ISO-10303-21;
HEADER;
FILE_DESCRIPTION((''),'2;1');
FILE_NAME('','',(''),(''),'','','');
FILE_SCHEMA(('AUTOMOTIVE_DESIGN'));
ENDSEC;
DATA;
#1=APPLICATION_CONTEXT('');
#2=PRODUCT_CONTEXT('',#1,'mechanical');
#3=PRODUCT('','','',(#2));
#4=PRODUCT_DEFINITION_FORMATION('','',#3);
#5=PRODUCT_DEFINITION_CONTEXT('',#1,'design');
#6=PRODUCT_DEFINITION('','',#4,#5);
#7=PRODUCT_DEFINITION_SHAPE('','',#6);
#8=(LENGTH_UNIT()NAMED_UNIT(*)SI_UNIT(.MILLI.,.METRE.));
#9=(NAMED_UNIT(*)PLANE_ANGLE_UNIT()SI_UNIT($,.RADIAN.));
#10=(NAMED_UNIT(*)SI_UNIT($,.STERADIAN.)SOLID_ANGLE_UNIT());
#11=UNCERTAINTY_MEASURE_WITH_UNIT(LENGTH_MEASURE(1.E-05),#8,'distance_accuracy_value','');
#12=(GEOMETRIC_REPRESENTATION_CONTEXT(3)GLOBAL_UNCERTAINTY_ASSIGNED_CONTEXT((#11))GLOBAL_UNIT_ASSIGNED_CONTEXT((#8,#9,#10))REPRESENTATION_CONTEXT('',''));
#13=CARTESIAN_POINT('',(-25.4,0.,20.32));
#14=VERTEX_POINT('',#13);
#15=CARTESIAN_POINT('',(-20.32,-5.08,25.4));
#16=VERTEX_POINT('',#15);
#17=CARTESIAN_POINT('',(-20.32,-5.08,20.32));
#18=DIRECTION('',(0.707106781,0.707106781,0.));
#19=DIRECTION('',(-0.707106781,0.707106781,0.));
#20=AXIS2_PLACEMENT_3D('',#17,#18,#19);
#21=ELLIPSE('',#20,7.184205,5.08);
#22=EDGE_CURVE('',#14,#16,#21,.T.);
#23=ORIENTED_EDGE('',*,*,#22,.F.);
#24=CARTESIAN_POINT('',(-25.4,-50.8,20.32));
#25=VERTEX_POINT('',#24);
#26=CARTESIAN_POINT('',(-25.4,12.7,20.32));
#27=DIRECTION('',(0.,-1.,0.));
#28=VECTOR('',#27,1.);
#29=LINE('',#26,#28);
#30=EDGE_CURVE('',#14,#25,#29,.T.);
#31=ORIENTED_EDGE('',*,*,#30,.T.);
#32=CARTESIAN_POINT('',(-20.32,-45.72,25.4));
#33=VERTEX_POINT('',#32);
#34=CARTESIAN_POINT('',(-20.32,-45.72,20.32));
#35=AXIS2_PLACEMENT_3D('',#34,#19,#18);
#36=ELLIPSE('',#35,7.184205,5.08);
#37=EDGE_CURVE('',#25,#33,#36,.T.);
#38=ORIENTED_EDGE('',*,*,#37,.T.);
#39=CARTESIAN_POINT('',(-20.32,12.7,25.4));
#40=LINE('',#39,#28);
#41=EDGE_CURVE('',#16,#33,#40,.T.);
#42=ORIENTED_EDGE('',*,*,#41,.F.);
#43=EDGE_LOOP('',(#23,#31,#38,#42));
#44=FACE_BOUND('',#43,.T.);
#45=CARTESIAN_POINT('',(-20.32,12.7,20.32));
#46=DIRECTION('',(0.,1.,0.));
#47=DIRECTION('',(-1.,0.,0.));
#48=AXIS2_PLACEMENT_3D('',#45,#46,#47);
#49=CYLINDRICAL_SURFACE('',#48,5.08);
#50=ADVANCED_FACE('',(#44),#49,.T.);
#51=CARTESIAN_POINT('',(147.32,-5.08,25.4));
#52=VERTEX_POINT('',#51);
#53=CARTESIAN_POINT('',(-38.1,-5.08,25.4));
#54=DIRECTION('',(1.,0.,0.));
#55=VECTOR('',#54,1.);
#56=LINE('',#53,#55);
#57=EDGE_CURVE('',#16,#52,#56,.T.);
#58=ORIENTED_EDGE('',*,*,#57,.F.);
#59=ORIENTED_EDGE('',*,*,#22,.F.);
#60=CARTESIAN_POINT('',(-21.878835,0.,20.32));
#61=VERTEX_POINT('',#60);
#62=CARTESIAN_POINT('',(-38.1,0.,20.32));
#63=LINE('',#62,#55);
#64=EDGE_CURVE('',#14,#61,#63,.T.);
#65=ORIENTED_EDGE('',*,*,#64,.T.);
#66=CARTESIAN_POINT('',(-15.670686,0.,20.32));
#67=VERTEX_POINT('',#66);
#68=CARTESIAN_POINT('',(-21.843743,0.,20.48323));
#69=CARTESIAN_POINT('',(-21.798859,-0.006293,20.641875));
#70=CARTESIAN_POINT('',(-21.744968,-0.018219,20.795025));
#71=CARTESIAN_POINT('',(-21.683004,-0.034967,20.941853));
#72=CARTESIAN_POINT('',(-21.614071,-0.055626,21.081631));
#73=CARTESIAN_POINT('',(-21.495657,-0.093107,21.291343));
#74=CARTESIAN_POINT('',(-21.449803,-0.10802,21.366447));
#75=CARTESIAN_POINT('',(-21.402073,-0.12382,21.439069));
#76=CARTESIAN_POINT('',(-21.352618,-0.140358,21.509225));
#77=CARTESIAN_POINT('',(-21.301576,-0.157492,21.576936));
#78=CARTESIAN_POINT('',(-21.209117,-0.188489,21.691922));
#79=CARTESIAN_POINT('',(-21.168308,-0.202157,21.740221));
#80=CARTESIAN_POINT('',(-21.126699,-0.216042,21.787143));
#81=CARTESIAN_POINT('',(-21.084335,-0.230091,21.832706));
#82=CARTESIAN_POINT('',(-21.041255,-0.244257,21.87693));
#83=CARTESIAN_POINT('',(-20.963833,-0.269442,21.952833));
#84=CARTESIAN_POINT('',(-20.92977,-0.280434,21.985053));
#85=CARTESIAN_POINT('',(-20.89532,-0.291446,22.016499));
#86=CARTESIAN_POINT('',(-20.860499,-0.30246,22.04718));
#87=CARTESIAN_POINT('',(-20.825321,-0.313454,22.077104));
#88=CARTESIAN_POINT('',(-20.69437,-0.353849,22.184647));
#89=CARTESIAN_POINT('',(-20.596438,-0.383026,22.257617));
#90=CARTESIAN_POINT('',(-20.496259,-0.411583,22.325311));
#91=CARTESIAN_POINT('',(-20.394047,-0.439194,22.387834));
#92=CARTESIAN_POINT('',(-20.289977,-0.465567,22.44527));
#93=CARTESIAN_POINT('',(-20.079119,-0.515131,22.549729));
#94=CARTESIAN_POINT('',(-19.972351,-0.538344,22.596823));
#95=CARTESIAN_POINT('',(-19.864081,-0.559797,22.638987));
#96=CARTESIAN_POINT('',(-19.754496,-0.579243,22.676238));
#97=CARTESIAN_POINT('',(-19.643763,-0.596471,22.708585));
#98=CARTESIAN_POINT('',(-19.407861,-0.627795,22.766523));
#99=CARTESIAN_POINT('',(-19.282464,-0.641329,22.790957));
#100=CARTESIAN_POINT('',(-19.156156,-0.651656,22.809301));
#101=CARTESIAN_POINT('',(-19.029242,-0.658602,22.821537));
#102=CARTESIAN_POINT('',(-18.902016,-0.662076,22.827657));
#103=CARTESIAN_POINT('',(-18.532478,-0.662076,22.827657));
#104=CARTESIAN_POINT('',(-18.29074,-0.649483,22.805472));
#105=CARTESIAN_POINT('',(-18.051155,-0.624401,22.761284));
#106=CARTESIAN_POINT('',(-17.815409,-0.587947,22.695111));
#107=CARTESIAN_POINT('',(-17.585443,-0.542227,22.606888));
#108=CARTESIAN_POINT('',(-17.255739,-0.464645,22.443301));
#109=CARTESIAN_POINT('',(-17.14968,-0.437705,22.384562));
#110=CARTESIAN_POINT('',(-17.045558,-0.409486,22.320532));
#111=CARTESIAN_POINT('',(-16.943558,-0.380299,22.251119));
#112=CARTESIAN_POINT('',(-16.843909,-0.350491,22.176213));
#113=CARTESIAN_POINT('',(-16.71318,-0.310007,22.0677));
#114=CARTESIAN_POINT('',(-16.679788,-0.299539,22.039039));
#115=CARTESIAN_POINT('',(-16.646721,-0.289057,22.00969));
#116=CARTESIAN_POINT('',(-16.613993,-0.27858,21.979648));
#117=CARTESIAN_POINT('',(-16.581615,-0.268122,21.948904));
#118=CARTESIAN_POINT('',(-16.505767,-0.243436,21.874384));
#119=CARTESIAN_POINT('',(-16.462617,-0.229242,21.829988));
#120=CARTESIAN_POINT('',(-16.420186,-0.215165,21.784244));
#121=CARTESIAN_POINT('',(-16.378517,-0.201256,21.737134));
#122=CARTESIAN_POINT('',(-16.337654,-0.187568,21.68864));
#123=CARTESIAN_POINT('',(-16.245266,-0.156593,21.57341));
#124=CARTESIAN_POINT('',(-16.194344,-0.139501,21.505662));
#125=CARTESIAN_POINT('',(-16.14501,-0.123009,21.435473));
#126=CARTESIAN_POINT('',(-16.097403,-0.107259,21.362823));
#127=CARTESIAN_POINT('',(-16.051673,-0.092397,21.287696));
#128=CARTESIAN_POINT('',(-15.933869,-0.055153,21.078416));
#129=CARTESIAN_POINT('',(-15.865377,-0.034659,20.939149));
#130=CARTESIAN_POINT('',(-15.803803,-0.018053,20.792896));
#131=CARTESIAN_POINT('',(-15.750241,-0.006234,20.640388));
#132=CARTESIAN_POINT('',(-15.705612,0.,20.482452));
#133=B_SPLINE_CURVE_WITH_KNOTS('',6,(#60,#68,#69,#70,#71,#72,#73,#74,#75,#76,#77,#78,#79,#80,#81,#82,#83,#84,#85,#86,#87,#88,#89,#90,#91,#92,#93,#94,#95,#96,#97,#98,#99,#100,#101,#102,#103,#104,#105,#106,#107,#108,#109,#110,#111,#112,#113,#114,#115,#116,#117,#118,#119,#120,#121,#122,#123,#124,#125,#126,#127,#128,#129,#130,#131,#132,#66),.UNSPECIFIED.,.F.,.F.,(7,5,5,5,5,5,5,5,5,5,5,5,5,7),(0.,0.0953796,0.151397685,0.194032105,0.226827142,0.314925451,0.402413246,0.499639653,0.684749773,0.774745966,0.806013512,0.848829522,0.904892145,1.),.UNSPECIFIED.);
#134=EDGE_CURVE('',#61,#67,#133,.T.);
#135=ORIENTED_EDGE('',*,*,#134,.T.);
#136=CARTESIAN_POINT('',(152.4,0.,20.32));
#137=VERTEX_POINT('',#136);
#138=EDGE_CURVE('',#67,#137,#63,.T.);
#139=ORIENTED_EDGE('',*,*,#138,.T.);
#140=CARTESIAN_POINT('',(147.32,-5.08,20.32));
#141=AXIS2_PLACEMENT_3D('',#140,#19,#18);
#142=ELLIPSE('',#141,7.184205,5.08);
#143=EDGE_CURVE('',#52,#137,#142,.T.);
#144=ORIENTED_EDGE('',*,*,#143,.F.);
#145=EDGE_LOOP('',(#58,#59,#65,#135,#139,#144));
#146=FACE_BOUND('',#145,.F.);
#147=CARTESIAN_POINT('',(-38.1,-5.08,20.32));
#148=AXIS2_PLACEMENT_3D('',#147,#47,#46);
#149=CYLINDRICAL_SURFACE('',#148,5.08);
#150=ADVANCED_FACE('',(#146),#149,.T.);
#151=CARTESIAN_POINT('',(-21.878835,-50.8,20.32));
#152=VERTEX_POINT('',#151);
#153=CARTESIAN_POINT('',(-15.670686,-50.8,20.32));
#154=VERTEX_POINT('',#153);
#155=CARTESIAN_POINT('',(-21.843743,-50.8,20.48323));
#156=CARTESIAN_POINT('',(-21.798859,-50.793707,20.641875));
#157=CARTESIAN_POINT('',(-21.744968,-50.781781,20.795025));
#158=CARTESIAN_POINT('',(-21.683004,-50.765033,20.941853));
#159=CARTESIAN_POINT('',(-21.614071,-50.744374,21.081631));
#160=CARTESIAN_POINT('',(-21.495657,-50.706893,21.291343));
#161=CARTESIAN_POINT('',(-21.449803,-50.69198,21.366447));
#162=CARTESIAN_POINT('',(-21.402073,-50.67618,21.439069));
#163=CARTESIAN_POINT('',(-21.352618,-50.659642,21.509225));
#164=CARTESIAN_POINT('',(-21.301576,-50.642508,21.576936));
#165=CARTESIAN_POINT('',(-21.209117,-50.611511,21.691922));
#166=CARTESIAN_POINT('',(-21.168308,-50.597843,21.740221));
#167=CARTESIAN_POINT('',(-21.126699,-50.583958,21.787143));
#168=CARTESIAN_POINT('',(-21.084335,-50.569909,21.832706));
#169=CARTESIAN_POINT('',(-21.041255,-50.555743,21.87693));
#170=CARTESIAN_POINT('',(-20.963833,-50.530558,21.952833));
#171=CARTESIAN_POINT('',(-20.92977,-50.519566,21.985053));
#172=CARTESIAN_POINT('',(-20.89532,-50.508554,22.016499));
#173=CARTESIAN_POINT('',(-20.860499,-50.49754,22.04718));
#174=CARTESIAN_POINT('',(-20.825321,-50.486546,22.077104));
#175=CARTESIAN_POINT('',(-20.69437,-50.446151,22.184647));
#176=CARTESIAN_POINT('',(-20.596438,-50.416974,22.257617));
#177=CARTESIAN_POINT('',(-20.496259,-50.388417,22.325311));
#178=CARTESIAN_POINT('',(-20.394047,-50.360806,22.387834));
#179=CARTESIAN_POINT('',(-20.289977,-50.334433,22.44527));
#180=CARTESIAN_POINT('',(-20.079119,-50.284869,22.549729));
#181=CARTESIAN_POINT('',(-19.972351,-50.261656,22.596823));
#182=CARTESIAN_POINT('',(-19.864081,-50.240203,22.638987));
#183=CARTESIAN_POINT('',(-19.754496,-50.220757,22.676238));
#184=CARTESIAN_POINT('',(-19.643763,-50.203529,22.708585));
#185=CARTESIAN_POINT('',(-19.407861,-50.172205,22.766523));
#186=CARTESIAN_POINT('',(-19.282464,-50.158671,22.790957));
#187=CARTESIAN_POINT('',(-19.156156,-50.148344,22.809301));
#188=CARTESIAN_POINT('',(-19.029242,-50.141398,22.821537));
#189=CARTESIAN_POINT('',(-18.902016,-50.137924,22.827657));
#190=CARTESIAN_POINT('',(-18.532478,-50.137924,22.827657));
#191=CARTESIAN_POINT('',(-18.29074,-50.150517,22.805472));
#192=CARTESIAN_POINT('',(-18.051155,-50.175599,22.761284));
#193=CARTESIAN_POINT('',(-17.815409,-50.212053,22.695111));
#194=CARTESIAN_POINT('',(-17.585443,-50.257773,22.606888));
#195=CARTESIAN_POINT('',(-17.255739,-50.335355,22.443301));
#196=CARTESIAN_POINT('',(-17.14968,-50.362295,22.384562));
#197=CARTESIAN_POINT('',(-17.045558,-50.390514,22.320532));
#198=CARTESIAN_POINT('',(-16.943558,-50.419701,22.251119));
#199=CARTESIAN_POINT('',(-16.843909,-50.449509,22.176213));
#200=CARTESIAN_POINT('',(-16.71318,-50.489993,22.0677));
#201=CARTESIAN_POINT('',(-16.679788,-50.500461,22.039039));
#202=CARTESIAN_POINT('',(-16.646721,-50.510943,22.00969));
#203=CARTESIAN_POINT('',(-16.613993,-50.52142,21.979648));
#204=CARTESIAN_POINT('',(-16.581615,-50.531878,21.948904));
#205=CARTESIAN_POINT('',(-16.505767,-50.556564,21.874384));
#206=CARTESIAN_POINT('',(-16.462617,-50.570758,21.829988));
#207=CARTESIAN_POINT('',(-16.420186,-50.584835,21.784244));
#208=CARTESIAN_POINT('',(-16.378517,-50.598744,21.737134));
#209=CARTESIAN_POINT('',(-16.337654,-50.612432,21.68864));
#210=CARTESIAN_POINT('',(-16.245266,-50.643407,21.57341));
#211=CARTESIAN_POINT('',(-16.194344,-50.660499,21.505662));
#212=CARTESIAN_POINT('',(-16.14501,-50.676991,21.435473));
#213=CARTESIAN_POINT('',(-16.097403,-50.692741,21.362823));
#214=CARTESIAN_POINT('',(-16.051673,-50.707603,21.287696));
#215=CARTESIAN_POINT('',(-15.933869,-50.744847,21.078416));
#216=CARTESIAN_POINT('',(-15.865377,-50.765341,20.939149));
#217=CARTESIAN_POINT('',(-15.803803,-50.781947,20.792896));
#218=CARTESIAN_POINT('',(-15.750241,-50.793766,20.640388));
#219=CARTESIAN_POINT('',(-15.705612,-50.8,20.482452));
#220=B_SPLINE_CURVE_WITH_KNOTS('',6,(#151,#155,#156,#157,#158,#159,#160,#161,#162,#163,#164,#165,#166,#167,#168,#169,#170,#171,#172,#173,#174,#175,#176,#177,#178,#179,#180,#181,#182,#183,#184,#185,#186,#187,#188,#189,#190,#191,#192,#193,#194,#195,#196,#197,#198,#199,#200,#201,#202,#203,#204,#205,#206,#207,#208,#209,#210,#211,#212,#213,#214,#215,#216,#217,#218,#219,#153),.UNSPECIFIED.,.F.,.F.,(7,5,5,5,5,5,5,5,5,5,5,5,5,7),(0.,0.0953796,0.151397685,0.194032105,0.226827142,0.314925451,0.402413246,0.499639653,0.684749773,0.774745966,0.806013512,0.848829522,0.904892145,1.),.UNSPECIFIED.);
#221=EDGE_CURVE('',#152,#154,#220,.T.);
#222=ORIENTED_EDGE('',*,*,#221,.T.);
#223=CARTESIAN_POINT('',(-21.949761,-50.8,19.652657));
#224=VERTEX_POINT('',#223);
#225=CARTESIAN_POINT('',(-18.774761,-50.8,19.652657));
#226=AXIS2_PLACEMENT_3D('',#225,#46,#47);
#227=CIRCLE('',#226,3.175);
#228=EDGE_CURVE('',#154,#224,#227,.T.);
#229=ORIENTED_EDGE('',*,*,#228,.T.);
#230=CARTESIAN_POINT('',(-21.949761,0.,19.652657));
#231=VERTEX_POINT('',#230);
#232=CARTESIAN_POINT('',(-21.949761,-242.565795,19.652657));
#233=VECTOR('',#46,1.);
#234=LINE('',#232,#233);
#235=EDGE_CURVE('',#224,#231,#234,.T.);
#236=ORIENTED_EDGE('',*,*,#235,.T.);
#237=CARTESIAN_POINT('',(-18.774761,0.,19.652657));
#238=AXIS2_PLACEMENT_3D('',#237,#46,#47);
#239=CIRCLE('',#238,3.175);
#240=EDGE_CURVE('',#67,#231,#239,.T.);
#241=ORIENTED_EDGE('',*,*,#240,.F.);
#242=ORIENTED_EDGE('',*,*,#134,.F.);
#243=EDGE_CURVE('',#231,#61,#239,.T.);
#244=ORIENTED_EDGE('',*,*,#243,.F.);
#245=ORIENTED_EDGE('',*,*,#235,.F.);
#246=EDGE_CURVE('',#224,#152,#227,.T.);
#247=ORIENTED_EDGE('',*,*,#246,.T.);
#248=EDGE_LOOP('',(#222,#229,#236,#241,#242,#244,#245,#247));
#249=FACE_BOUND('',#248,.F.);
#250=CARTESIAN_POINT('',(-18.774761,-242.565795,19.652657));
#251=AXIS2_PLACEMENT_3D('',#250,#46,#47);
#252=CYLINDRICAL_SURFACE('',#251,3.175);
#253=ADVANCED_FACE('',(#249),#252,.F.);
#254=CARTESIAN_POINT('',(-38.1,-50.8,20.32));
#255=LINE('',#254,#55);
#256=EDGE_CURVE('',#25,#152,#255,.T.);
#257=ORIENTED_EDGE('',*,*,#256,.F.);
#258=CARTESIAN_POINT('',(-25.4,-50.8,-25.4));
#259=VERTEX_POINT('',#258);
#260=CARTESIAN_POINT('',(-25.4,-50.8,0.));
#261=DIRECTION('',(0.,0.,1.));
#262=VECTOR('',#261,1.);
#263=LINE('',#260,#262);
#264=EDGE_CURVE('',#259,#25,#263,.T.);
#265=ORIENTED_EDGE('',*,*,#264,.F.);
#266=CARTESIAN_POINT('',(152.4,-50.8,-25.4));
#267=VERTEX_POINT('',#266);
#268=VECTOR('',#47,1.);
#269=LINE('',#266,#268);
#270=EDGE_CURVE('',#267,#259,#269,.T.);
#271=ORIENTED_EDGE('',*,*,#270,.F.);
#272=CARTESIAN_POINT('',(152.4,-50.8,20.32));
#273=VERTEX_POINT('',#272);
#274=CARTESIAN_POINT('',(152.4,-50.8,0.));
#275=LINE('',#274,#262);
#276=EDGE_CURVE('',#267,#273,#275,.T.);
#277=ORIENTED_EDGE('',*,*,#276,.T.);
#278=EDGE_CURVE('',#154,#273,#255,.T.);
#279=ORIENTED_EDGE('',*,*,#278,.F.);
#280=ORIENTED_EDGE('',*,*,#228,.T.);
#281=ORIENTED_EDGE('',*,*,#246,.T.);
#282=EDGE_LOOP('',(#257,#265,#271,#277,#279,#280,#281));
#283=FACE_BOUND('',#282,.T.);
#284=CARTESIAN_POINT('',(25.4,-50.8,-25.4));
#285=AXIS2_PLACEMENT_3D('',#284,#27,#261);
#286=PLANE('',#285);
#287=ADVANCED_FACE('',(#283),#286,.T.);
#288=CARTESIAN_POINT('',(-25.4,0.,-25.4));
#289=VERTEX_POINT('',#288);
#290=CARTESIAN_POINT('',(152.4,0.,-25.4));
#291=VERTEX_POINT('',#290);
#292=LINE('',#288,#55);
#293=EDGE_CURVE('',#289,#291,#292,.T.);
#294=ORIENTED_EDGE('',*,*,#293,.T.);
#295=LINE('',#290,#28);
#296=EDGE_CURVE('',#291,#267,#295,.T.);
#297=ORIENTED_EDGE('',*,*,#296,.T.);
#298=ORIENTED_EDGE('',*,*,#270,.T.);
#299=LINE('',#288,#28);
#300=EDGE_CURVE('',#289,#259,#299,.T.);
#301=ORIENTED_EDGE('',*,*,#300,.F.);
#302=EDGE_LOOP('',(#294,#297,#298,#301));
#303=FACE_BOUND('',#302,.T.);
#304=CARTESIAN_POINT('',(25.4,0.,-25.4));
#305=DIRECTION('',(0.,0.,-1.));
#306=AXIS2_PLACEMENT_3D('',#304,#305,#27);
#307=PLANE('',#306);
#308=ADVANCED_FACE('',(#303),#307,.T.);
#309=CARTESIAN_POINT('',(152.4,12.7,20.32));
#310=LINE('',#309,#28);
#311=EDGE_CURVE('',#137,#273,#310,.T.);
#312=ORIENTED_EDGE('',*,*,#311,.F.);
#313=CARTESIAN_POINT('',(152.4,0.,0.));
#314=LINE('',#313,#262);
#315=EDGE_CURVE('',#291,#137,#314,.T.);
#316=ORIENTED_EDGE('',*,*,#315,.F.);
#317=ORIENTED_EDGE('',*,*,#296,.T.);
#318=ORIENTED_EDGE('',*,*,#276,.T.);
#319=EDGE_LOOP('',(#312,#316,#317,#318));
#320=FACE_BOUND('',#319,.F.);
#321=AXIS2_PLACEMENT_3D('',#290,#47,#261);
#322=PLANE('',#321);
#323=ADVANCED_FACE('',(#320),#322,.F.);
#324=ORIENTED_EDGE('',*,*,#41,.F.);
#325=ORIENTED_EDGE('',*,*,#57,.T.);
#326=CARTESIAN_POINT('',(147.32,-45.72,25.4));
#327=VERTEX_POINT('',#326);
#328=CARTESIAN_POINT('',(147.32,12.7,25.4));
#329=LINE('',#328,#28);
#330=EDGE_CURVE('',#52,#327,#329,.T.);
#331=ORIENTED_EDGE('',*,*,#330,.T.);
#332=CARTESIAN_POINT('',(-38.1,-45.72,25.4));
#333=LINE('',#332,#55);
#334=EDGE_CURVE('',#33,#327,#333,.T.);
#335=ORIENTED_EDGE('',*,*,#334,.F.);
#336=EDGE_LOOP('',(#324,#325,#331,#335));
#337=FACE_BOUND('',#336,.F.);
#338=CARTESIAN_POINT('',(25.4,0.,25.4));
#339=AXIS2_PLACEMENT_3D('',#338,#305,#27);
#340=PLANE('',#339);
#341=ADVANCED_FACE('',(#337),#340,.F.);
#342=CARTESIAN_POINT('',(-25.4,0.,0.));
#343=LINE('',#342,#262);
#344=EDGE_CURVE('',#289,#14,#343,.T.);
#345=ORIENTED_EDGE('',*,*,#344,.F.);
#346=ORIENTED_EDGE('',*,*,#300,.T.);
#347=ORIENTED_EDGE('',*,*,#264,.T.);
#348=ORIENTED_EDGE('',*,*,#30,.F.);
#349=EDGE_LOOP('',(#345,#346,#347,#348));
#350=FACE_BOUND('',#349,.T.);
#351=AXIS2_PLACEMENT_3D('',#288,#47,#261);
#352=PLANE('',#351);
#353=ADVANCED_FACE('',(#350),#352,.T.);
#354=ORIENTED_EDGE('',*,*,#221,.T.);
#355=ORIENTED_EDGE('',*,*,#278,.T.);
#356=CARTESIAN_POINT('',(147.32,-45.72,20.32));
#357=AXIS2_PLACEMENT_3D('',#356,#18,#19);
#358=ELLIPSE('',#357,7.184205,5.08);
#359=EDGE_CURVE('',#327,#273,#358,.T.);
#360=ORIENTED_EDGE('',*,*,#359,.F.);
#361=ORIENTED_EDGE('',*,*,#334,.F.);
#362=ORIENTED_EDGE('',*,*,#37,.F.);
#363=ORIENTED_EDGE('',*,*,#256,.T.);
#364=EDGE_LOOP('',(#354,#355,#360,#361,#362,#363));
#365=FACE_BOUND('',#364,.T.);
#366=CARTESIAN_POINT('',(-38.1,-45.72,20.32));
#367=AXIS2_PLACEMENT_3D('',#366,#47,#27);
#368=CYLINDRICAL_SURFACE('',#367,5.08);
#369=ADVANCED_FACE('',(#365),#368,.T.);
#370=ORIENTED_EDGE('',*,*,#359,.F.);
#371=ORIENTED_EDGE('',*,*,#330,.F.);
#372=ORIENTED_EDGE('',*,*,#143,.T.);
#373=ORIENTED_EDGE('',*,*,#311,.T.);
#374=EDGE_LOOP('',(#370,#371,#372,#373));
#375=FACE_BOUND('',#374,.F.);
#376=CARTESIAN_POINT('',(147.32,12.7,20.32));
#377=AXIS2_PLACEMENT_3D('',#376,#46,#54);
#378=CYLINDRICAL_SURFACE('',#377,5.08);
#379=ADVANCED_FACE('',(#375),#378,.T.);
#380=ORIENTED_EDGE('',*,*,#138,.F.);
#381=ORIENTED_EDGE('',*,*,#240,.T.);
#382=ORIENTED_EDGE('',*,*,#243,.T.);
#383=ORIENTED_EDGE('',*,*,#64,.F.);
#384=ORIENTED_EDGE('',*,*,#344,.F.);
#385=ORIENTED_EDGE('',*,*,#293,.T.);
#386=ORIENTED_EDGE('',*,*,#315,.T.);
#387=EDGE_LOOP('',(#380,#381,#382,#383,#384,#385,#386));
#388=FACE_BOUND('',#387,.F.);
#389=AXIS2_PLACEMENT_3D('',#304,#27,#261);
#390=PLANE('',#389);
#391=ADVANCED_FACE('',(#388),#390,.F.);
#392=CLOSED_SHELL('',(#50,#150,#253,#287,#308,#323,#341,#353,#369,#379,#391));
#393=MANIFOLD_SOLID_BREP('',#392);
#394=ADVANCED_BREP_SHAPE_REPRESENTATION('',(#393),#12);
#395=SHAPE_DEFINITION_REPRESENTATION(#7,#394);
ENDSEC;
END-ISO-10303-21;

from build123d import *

# Parameters (mm, degrees)
F0_W        = 50.8
F0_H        = 50.8
F1_DEPTH    = 50.8
F2_DEPTH    = 127
F4_D        = 6.35
F5_T1_DEPTH = 76.2
F5_T3_DEPTH = 203.2


# Not quite as in the source:
# - a fillet or chamfer that OpenCascade refuses, or shapes differently, is made with other operations: its cross-section is extruded or revolved along the edge and cut away or added


with BuildPart() as f1:
    # F0 (on Front) → F1 (new body)
    with BuildSketch(Plane.XZ):
        Rectangle(F0_W, F0_H)
    extrude(amount=F1_DEPTH)

    # F2 (add): a face of the model
    f2_faces = [f1.faces().sort_by_distance(p)[0] for p in [
        (25.4, -25.4, 0),
    ]]
    extrude(f2_faces, amount=F2_DEPTH)

    # F4 (through all)
    with Locations(Plane.XZ.offset(50.8)):
        with Locations((-18.774760887, 19.6526572108)):
            Hole(F4_D / 2)

    # F5: fillet of radius 5.08 on 4 edges, made by hand

    # F5_s2 → F5_t1 (cut)
    with BuildSketch(Plane.XZ.offset(-12.7)):
        with BuildLine():
            ThreePointArc((-25.4, 20.32), (-23.9121024484, 23.9121024484), (-20.32, 25.4))
            Line((-20.32, 25.4), (-25.4, 25.4))
            Line((-25.4, 25.4), (-25.4, 20.32))
        make_face()
        with BuildLine():
            ThreePointArc((152.4, 20.32), (150.9121024484, 23.9121024484), (147.32, 25.4))
            Line((147.32, 25.4), (152.4, 25.4))
            Line((152.4, 25.4), (152.4, 20.32))
        make_face()
    extrude(amount=F5_T1_DEPTH, mode=Mode.SUBTRACT)

    # F5_s4 → F5_t3 (cut)
    with BuildSketch(Plane.YZ.offset(-38.1)):
        with BuildLine():
            ThreePointArc((0, 20.32), (-1.4878975516, 23.9121024484), (-5.08, 25.4))
            Line((-5.08, 25.4), (0, 25.4))
            Line((0, 25.4), (0, 20.32))
        make_face()
        with BuildLine():
            ThreePointArc((-50.8, 20.32), (-49.3121024484, 23.9121024484), (-45.72, 25.4))
            Line((-45.72, 25.4), (-50.8, 25.4))
            Line((-50.8, 25.4), (-50.8, 20.32))
        make_face()
    extrude(amount=F5_T3_DEPTH, mode=Mode.SUBTRACT)


solid = f1.part
